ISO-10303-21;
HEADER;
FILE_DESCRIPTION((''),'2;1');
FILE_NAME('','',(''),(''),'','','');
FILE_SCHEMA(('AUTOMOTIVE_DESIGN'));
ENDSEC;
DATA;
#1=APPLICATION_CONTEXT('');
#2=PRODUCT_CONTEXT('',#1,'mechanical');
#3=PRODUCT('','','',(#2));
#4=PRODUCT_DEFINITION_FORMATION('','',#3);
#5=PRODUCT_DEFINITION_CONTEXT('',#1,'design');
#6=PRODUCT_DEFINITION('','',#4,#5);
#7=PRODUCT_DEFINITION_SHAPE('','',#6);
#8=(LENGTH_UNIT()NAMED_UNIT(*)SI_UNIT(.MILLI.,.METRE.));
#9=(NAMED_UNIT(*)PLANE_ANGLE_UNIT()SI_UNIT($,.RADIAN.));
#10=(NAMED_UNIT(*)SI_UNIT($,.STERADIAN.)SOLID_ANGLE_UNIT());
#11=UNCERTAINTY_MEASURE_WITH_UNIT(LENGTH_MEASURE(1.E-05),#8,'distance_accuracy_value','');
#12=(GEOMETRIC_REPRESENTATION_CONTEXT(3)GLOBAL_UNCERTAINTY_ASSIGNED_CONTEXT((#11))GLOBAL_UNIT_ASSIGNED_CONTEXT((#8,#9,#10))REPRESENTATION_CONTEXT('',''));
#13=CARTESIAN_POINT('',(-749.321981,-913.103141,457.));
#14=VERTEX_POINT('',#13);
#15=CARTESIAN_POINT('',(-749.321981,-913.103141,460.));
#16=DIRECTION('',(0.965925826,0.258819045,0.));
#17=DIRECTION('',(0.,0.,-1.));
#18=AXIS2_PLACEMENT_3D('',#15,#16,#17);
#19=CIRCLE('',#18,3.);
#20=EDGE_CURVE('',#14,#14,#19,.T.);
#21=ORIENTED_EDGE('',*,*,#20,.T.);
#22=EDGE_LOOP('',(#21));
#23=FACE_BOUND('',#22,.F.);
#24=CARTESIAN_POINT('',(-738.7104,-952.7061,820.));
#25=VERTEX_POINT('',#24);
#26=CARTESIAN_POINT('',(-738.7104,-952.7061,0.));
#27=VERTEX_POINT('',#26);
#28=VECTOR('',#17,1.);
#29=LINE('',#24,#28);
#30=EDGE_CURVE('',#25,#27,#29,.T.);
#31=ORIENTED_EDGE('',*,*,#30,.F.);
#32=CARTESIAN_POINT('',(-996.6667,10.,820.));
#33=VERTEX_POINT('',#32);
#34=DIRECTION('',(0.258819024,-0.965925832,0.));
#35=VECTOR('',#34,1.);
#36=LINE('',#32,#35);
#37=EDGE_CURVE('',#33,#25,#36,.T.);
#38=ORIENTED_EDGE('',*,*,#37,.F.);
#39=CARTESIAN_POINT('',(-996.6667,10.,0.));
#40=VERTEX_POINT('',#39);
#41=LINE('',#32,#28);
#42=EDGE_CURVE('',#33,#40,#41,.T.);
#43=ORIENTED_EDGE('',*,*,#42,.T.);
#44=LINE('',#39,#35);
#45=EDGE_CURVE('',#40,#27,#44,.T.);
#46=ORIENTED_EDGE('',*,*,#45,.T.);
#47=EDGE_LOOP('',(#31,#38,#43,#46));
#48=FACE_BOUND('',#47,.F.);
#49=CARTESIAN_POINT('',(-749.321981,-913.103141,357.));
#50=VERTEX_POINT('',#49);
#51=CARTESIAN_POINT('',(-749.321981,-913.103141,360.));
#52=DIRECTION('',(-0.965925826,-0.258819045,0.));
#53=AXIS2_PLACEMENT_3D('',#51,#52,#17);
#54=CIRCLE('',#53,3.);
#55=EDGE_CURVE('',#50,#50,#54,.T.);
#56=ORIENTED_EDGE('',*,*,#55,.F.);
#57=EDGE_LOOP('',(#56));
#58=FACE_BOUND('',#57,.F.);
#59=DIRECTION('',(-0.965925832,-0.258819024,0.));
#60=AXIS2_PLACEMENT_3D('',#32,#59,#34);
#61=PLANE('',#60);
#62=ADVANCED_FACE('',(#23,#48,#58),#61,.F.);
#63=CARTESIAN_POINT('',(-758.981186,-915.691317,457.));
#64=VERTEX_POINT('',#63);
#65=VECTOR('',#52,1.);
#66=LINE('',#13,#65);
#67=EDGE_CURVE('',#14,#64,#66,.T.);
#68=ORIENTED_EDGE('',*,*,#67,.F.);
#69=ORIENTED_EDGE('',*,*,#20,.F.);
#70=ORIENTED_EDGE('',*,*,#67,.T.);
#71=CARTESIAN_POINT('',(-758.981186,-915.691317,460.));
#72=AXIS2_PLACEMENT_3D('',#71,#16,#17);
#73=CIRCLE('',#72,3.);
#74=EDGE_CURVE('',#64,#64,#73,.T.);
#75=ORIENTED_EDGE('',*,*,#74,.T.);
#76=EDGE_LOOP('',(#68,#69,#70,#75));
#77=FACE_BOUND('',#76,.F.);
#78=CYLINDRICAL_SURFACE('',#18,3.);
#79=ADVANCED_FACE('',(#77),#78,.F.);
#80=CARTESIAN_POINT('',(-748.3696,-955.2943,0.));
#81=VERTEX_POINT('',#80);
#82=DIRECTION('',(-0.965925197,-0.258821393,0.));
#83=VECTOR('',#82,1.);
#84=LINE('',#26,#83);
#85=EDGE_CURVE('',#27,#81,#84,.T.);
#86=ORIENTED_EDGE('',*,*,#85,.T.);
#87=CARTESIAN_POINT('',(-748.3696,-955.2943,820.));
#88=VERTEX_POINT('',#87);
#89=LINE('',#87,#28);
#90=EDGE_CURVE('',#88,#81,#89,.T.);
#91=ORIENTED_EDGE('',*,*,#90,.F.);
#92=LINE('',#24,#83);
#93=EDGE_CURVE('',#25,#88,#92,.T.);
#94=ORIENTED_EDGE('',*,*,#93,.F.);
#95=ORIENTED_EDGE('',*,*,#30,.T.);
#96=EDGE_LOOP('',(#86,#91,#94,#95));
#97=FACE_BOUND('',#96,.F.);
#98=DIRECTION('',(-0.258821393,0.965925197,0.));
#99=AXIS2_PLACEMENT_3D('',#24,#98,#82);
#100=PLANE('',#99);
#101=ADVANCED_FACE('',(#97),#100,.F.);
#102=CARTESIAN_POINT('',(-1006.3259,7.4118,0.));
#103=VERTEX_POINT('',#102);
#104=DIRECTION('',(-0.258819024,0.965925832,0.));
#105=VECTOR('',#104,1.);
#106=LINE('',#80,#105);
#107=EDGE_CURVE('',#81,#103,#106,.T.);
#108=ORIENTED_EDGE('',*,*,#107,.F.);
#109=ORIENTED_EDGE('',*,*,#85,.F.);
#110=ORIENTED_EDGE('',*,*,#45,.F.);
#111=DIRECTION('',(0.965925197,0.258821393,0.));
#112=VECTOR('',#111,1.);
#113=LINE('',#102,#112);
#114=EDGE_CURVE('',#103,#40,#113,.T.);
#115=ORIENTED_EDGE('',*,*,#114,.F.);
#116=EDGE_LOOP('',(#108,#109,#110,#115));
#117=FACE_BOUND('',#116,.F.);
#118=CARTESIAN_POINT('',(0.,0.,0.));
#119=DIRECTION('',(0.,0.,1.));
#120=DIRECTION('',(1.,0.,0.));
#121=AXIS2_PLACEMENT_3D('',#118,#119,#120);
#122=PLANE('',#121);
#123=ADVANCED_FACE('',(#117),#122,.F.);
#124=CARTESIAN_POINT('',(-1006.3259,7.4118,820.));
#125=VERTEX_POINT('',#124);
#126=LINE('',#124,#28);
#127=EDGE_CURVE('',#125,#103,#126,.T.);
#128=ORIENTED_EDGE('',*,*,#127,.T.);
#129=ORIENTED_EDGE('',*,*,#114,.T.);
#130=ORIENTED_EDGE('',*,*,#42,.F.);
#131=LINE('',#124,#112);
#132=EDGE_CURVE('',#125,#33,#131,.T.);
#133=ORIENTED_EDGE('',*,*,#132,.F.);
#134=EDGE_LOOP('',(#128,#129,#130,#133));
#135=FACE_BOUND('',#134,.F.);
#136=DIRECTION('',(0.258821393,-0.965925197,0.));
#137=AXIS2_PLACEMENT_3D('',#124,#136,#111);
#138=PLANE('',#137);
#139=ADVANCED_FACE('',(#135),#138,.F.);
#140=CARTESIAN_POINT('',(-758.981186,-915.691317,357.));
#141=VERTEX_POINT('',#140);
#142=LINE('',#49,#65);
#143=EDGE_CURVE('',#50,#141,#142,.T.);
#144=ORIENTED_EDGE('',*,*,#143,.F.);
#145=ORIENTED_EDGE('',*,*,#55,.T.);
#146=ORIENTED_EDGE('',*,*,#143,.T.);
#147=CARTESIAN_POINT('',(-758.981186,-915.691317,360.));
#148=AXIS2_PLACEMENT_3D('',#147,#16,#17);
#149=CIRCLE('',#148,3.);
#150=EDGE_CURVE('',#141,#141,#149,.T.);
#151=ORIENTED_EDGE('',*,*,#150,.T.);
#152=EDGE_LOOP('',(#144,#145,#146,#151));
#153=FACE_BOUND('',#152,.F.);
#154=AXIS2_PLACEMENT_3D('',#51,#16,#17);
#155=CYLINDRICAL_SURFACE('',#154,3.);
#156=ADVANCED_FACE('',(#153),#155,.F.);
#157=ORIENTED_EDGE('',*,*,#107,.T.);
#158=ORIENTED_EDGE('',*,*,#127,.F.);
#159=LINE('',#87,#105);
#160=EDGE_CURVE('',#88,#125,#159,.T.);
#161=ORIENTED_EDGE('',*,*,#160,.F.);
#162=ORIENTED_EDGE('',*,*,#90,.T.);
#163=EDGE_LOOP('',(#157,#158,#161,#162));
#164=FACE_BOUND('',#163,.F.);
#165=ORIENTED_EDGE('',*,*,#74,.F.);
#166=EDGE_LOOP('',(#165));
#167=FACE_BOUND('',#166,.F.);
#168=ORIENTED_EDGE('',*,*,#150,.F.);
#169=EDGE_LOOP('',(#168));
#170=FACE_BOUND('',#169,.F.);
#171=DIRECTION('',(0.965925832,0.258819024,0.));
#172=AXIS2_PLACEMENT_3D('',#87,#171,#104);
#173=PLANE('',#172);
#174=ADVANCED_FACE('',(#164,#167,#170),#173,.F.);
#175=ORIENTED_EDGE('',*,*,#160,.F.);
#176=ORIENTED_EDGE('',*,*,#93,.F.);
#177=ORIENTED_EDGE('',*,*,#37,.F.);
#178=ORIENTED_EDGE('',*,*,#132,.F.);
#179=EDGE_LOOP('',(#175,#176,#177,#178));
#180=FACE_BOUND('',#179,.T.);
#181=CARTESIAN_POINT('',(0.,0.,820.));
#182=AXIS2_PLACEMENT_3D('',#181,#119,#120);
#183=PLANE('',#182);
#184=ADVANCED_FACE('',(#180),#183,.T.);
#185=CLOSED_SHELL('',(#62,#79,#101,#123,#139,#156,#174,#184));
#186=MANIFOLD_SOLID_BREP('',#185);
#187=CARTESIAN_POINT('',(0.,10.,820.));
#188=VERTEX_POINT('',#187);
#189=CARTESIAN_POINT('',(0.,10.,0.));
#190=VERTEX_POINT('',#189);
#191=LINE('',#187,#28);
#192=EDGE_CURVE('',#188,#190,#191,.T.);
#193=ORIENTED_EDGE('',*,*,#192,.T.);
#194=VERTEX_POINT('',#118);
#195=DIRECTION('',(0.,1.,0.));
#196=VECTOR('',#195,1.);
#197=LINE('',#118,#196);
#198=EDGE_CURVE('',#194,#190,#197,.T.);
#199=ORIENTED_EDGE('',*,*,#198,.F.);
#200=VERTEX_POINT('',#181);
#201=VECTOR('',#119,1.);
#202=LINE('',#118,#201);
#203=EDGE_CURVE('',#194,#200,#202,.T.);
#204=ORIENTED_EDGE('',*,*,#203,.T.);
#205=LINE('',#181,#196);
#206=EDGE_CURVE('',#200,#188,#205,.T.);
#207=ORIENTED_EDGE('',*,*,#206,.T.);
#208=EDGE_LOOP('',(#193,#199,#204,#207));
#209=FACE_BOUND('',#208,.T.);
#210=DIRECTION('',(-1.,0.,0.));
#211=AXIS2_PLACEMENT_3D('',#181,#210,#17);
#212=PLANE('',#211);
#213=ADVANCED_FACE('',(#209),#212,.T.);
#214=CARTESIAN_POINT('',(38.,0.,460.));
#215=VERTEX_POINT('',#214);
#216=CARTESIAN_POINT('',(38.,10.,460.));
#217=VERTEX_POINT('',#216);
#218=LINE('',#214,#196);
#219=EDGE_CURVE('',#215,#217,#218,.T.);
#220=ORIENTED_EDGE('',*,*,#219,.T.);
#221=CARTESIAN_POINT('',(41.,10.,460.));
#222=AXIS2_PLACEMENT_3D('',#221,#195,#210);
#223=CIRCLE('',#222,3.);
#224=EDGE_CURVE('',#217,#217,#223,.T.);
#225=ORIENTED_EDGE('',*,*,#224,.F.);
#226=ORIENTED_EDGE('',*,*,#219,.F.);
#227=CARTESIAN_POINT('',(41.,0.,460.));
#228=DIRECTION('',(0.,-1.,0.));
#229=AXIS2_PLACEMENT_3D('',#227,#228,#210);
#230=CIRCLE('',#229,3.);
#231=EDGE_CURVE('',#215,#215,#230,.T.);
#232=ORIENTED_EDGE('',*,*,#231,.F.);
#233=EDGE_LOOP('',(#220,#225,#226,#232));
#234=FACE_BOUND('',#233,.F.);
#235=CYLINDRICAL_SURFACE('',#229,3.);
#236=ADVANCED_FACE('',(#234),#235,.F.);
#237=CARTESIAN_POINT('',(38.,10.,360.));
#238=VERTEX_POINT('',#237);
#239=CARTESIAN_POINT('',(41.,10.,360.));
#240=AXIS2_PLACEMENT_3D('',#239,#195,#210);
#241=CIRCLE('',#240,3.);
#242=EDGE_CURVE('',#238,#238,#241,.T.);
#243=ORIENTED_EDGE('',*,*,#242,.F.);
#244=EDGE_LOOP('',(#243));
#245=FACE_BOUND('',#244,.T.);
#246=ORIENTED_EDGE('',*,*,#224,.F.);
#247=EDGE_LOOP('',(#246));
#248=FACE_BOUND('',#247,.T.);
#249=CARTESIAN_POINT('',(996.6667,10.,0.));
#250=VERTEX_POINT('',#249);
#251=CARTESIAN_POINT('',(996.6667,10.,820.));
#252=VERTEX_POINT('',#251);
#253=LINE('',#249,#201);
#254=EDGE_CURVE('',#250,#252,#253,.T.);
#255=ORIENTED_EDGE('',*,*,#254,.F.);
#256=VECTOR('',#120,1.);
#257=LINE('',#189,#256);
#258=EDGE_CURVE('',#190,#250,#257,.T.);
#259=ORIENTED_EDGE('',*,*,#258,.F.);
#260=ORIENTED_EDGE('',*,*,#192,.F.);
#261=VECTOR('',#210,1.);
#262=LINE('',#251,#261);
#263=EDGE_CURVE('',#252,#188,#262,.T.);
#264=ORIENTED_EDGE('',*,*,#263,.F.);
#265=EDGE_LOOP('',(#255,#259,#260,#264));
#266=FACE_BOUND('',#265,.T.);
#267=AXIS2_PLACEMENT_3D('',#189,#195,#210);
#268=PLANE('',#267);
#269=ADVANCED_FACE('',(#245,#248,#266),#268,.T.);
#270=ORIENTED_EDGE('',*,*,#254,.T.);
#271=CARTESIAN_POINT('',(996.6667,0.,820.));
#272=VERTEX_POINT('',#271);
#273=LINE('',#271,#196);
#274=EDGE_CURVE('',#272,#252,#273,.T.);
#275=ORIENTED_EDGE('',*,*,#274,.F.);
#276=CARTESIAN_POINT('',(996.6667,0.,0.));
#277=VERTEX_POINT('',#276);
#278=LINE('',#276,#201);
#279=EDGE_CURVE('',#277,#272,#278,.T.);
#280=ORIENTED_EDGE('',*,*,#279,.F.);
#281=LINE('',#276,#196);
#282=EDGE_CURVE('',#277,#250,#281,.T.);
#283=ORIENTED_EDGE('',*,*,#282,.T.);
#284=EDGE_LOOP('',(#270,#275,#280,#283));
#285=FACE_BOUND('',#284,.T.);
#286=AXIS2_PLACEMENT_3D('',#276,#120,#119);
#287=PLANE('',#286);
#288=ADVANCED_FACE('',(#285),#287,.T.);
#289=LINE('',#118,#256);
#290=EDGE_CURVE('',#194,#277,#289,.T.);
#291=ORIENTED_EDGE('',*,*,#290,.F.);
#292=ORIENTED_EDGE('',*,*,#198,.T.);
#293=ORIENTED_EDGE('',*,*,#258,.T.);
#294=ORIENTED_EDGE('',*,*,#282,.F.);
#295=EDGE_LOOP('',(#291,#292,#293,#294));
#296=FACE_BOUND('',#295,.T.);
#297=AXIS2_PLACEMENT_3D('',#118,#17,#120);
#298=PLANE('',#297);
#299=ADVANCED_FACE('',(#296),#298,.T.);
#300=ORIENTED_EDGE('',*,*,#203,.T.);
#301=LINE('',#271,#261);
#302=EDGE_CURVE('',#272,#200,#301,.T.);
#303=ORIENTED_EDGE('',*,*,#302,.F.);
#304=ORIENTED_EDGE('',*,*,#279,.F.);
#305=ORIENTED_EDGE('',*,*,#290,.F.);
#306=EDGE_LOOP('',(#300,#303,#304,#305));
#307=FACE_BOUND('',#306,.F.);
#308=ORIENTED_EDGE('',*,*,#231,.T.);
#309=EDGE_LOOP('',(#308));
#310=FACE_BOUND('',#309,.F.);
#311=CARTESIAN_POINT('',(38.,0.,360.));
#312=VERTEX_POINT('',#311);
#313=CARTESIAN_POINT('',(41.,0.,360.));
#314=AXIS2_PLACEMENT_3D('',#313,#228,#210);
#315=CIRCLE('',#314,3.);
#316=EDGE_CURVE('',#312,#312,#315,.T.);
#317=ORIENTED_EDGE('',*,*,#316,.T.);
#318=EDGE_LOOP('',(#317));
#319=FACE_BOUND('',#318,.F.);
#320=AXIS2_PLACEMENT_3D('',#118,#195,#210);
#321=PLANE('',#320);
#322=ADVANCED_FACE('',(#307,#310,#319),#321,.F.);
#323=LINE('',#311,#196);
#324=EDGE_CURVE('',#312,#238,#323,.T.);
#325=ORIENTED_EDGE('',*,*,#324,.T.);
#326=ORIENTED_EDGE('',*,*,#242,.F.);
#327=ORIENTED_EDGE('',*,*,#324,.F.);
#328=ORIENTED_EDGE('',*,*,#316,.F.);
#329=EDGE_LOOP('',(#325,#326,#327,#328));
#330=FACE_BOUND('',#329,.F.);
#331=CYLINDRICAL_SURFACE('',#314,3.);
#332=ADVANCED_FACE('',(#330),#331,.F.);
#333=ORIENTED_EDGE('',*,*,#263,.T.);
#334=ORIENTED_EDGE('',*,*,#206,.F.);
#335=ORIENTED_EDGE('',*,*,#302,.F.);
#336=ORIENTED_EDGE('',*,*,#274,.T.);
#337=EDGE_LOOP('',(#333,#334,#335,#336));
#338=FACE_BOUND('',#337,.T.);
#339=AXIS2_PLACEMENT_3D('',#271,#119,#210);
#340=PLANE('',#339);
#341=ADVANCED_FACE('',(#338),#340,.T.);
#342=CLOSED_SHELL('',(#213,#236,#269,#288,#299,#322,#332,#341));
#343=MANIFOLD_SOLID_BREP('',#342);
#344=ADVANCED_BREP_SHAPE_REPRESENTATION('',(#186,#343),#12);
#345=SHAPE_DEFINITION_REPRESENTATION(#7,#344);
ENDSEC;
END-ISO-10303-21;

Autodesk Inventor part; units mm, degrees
ref_plane "YZ Plane" through (0, 0, 0) normal (1, 0, 0) x (0, 1, 0)
ref_plane "XZ Plane" through (0, 0, 0) normal (0, 1, 0) x (-1, 0, 0)
ref_plane "XY Plane" through (0, 0, 0) normal (0, 0, 1) x (1, 0, 0)
sketch "Sketch1" plane through (0, 0, 0) normal (0, 1, 0) x (-1, 0, 0)
  line L0 (0, 0) -> (-996.6667, 0)
  line L1 (-996.6667, 0) -> (-996.6667, 820)
  line L2 (-996.6667, 820) -> (0, 820)
  line L3 (0, 820) -> (0, 0)
  line L4 (0, 410) -> (-41, 410)
  line L5 (-41, 410) -> (-41, 460)
  line L6 (-41, 460) -> (-41, 360)
  circle A0 centre (-41, 460) radius 3
  circle A1 centre (-41, 360) radius 3
  dimension "ancho_m" = 996.6667
  dimension "h_inf" = 820
  dimension "d2" = 41
  dimension "d3" = 50
  dimension "d4" = 100
  dimension "d5" = 6
  dimension "d6" = 6
extrude "Extrusion1" add sketch "Sketch1" along normal blind 10
sketch "Boceto10" plane through (0, 0, 820) normal (0, 0, 1) x (1, 0, 0)
  line L0 (996.6667, 10) -> (0, 10) projected
  line L1 (0, 10) -> (-996.6667, 10)
  line L2 (-996.6667, 10) -> (-738.7104, -952.7061)
  line L3 (-996.6667, 10) -> (0, 10) construction
  line L4 (-738.7104, -952.7061) -> (-748.3696, -955.2943)
  line L5 (-748.3696, -955.2943) -> (-1006.3259, 7.4118)
  line L6 (-1006.3259, 7.4118) -> (-996.6667, 10)
  point P0 (0, 0)
  dimension "d49" = 996.6667
  dimension "d50" = 996.6667
  dimension "angulo" = 75
  dimension "d52" = 10
  dimension "d53" = 996.6667
extrude "Extrusión10" add sketch "Boceto10" against normal blind 820
sketch "Boceto11" plane through (-738.7104, -952.7061, 820) normal (0.9659258, 0.258819, 0) x (0, 0, -1)
  line L0 (0, 996.6667) -> (0, 0) projected
  line L1 (0, 0) -> (820, 0) projected
  line L2 (820, 996.6667) -> (820, 0) projected
  line L3 (0, 996.6667) -> (820, 996.6667) projected
  line L4 (0, 0) -> (820, 0) projected
  line L5 (410, 0) -> (410, 41)
  line L6 (410, 41) -> (360, 41)
  line L7 (360, 41) -> (460, 41)
  circle A0 centre (360, 41) radius 3
  circle A1 centre (460, 41) radius 3
  point P0 (820, 729.0511)
  dimension "d56" = 41
  dimension "d57" = 50
  dimension "d58" = 100
  dimension "d59" = 6
  dimension "d60" = 6
extrude "Extrusión11" cut sketch "Boceto11" against normal up to next contours A0 | A1
equation "\"d2\" = 0.05 * h_inf"
equation "\"d49\" = ancho_m"
equation "\"d50\" = ancho_m"
equation "\"d52\" = espesor"
equation "\"d53\" = ancho_m"
equation "\"d54\" = h_inf"
equation "\"d56\" = 0.05 * h_inf"
equation "\"d61\" = h_inf"
equation "\"espesor\" = 10"
properties part number "puerta_inf"
